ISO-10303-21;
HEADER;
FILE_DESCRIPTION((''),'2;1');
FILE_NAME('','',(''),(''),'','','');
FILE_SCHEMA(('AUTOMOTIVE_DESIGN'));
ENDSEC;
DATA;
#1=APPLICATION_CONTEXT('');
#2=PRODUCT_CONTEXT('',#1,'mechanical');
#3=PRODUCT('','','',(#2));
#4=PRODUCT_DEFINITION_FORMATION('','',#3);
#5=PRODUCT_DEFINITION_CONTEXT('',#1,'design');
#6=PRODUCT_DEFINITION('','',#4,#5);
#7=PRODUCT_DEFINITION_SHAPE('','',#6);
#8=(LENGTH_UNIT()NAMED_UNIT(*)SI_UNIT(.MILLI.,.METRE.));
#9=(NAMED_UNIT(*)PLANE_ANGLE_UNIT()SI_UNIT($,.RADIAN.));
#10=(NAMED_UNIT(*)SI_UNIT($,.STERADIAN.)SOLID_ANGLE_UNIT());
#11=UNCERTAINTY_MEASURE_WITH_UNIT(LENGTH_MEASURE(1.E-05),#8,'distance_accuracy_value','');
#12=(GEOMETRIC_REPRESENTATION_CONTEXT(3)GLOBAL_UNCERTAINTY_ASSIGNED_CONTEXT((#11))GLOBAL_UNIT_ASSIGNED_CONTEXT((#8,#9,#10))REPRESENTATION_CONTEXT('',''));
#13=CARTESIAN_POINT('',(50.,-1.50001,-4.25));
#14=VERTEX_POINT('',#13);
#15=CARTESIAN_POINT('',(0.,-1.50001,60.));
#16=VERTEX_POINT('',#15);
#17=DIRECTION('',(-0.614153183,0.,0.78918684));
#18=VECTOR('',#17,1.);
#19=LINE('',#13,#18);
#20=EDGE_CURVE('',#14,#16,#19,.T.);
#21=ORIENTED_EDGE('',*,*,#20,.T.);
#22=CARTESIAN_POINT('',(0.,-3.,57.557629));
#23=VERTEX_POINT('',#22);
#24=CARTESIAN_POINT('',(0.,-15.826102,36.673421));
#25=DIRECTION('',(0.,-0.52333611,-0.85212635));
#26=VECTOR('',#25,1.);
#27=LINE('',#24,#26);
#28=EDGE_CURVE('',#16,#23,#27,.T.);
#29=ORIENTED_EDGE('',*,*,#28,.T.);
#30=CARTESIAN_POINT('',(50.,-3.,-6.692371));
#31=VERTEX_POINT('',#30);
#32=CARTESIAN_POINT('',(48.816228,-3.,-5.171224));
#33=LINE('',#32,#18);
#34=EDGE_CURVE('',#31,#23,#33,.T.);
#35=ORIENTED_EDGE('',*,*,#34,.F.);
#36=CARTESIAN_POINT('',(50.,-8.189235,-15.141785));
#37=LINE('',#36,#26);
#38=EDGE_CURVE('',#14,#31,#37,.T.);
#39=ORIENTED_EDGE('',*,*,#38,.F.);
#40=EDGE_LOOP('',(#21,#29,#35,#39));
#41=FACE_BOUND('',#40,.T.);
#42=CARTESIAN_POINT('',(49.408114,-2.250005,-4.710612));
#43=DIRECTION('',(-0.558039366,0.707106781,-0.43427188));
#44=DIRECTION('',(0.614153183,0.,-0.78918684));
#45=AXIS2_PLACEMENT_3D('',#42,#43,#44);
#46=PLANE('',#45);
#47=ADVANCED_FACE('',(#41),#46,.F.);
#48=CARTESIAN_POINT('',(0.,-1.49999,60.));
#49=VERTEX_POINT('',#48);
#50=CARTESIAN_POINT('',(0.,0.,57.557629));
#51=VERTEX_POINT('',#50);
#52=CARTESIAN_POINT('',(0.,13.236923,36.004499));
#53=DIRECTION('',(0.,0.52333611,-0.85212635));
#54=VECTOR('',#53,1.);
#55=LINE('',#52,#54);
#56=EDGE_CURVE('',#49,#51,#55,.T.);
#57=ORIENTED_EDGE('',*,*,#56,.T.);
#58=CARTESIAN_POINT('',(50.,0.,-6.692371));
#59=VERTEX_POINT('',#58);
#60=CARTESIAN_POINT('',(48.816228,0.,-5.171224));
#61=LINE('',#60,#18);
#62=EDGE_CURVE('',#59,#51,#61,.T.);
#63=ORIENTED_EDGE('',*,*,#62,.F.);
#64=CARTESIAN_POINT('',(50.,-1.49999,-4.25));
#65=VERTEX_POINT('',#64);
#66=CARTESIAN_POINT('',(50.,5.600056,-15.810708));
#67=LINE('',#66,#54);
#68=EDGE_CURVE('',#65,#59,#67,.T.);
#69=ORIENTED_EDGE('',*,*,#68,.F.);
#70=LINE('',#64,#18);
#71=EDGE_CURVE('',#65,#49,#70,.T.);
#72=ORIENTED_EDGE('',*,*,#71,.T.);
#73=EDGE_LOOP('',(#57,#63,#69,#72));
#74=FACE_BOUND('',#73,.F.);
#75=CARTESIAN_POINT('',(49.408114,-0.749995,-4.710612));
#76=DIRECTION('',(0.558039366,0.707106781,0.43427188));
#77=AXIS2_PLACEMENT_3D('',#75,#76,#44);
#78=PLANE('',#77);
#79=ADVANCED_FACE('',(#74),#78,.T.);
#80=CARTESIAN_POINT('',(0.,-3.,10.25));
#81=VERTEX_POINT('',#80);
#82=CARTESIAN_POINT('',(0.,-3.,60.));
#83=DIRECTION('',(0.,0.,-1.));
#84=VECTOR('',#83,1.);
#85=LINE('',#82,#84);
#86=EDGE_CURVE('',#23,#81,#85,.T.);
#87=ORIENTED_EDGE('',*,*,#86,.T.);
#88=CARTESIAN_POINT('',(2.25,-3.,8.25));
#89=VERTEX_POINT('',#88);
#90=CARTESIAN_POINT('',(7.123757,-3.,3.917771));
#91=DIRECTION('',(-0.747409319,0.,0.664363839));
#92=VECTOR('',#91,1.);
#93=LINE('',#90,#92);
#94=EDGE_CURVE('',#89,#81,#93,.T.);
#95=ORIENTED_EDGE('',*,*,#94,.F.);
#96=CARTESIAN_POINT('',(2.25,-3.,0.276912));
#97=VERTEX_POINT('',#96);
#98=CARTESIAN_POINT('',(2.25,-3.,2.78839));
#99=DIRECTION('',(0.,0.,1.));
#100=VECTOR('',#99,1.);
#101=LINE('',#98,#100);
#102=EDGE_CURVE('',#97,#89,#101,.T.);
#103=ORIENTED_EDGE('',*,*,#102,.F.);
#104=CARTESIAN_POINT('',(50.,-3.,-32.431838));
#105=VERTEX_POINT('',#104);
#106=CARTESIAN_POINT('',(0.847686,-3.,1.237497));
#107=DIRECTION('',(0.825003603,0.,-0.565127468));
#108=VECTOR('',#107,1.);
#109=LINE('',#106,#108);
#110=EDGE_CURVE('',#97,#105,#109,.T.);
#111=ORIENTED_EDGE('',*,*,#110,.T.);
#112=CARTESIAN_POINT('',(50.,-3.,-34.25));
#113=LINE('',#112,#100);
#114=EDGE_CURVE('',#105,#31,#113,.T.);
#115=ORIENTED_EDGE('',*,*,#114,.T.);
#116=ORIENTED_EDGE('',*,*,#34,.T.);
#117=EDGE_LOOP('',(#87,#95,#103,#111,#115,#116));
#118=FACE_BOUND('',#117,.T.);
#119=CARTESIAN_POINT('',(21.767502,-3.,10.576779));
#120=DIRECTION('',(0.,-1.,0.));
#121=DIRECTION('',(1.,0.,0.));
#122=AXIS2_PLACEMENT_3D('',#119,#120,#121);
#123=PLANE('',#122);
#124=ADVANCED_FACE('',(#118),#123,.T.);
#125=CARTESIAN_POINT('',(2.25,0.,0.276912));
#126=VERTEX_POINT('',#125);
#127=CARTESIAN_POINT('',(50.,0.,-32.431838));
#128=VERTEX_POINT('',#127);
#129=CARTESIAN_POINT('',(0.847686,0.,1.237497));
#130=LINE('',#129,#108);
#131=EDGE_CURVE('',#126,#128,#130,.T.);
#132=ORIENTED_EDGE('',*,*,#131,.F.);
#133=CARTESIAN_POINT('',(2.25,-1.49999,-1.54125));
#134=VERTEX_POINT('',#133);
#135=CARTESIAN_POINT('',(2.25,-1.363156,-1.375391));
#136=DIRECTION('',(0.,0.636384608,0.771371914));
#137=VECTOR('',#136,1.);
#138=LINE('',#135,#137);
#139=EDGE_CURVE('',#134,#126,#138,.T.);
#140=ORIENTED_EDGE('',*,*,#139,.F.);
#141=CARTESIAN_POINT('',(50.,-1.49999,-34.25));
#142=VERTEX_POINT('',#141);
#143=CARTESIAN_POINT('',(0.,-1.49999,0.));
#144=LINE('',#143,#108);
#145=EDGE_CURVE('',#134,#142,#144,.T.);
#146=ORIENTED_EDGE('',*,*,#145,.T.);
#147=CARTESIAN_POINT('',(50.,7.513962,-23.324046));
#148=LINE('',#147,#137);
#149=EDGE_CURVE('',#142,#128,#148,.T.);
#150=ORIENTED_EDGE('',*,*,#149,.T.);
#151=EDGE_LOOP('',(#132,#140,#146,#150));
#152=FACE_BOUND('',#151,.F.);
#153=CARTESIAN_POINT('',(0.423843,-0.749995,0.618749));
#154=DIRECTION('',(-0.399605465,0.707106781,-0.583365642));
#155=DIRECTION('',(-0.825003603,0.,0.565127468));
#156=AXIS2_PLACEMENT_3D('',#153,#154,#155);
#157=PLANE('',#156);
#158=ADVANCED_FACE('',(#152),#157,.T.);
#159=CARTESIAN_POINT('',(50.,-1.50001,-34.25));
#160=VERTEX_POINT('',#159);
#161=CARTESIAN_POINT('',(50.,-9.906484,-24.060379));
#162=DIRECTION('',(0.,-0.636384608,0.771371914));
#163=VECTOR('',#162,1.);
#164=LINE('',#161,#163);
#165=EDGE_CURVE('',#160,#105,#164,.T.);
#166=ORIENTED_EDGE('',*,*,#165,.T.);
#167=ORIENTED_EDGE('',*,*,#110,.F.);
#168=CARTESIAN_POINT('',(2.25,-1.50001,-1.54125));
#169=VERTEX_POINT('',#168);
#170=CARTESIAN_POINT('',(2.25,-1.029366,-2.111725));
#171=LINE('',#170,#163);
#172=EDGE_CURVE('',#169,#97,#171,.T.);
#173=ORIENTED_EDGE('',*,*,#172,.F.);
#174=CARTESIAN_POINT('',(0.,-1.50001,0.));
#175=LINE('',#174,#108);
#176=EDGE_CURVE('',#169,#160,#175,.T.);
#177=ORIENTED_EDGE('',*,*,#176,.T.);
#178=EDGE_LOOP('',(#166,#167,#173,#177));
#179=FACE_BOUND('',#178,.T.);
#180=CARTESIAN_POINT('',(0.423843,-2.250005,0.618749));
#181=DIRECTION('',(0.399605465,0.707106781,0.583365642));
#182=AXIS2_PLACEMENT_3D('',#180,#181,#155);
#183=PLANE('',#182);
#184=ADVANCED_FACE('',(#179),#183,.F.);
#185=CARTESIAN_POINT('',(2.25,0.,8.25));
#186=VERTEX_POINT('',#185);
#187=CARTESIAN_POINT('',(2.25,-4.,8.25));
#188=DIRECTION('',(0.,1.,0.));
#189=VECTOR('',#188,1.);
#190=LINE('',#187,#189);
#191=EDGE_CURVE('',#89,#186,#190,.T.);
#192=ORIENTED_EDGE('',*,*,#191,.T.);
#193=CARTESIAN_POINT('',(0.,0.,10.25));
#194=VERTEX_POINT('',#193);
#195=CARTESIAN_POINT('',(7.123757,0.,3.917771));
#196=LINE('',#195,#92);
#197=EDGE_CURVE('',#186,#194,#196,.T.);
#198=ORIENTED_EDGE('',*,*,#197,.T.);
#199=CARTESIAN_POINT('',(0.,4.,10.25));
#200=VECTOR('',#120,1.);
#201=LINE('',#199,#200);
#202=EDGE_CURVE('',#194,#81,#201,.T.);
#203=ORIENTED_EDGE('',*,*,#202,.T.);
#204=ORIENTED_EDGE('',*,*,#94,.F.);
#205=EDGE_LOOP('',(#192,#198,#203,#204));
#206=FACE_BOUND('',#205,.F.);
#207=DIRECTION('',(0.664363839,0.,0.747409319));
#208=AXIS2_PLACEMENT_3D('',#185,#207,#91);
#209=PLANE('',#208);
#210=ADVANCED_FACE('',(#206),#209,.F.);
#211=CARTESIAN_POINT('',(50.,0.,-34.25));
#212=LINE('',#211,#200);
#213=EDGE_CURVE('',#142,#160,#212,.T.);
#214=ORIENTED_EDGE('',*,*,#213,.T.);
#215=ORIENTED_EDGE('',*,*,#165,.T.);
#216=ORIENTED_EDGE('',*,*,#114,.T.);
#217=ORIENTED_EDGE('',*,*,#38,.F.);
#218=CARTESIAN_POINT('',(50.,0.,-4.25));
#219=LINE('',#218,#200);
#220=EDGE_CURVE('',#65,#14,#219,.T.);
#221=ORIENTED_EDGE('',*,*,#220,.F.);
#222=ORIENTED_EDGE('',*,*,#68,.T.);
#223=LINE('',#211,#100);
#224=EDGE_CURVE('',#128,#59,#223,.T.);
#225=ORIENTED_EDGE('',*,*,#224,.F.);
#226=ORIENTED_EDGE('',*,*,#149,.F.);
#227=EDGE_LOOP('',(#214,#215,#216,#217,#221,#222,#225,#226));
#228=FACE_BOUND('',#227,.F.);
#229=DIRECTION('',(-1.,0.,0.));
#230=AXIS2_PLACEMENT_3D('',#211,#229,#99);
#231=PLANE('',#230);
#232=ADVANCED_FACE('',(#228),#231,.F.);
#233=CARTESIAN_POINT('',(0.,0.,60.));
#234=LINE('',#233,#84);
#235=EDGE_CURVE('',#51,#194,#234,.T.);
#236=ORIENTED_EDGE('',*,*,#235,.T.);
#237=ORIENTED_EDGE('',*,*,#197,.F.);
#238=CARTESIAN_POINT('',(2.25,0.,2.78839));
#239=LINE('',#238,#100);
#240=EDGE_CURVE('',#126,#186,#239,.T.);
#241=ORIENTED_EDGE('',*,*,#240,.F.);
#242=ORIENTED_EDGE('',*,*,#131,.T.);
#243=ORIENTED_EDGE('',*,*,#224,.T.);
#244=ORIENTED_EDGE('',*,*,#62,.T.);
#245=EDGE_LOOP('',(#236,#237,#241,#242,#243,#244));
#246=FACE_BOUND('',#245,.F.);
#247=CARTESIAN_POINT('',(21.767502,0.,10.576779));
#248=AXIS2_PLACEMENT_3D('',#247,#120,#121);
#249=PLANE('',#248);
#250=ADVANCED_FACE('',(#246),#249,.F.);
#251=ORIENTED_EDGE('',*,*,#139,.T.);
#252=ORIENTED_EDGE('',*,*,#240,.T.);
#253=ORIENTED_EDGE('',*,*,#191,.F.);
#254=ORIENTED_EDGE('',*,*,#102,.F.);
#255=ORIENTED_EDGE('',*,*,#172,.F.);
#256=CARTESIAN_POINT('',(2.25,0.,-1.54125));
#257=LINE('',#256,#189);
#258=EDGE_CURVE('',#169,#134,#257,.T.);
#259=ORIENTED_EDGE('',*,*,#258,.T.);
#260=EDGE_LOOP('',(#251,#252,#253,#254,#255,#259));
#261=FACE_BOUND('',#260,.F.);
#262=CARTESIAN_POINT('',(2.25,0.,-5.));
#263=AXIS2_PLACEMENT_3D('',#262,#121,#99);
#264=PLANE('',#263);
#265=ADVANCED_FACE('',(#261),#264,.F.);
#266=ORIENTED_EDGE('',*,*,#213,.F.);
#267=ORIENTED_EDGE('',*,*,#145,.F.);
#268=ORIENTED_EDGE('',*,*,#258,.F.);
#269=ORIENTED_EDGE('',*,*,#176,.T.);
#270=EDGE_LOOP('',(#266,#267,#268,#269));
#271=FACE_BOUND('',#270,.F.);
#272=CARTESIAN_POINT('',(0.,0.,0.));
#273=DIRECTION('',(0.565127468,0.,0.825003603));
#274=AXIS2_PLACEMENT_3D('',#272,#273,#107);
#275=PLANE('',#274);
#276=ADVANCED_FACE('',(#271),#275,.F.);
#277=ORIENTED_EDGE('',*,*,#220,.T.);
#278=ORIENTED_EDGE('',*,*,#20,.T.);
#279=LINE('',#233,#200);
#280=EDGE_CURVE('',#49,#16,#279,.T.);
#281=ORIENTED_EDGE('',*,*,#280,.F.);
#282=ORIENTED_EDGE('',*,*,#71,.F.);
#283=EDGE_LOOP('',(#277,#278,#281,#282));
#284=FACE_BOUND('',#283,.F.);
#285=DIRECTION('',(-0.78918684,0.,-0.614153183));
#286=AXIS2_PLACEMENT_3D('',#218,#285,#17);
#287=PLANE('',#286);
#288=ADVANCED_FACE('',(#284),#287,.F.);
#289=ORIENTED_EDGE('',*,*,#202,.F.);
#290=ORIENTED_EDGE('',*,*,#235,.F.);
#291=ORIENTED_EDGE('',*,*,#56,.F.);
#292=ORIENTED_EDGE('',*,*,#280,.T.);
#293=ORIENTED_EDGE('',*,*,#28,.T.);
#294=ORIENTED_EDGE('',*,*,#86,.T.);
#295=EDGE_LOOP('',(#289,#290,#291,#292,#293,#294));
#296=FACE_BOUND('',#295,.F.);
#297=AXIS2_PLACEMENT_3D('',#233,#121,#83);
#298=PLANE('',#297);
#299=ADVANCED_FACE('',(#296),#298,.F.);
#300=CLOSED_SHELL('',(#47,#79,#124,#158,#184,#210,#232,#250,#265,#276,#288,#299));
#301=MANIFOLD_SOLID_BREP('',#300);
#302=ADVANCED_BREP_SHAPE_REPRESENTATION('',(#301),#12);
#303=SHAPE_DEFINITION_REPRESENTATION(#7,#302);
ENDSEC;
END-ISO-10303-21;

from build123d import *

# Parameters (mm, degrees)
F1_DEPTH = 3
F2_SIZE  = 1.49999
F4_DEPTH = 4


# Not quite as in the source:
# - a fillet or chamfer is up to 0.001 mm smaller than in the source, because OpenCascade refuses the exact size


with BuildPart() as f1:
    # F0 (on Front) → F1 (new body)
    with BuildSketch(Plane.XZ):
        Polygon((0, 60), (0, 0), (50, -34.25), (50, -4.25), align=None)
    extrude(amount=F1_DEPTH)

    # F2 (size 1.5 in the source; OpenCascade refuses exactly that, so slightly less here)
    f2_edges = [f1.edges().sort_by_distance(p)[0] for p in [
        (25, -3, 27.875),
        (25, 0, 27.875),
        (25, -3, -17.125),
        (25, 0, -17.125),
    ]]
    chamfer(f2_edges, length=F2_SIZE)

    # F3 (on Front) → F4 (cut, symmetric)
    with BuildSketch(Plane.XZ):
        Polygon((2.25, 8.25), (0, 10.25), (0, -5), (2.25, -5), align=None)
    extrude(amount=F4_DEPTH, both=True, mode=Mode.SUBTRACT)


solid = f1.part
